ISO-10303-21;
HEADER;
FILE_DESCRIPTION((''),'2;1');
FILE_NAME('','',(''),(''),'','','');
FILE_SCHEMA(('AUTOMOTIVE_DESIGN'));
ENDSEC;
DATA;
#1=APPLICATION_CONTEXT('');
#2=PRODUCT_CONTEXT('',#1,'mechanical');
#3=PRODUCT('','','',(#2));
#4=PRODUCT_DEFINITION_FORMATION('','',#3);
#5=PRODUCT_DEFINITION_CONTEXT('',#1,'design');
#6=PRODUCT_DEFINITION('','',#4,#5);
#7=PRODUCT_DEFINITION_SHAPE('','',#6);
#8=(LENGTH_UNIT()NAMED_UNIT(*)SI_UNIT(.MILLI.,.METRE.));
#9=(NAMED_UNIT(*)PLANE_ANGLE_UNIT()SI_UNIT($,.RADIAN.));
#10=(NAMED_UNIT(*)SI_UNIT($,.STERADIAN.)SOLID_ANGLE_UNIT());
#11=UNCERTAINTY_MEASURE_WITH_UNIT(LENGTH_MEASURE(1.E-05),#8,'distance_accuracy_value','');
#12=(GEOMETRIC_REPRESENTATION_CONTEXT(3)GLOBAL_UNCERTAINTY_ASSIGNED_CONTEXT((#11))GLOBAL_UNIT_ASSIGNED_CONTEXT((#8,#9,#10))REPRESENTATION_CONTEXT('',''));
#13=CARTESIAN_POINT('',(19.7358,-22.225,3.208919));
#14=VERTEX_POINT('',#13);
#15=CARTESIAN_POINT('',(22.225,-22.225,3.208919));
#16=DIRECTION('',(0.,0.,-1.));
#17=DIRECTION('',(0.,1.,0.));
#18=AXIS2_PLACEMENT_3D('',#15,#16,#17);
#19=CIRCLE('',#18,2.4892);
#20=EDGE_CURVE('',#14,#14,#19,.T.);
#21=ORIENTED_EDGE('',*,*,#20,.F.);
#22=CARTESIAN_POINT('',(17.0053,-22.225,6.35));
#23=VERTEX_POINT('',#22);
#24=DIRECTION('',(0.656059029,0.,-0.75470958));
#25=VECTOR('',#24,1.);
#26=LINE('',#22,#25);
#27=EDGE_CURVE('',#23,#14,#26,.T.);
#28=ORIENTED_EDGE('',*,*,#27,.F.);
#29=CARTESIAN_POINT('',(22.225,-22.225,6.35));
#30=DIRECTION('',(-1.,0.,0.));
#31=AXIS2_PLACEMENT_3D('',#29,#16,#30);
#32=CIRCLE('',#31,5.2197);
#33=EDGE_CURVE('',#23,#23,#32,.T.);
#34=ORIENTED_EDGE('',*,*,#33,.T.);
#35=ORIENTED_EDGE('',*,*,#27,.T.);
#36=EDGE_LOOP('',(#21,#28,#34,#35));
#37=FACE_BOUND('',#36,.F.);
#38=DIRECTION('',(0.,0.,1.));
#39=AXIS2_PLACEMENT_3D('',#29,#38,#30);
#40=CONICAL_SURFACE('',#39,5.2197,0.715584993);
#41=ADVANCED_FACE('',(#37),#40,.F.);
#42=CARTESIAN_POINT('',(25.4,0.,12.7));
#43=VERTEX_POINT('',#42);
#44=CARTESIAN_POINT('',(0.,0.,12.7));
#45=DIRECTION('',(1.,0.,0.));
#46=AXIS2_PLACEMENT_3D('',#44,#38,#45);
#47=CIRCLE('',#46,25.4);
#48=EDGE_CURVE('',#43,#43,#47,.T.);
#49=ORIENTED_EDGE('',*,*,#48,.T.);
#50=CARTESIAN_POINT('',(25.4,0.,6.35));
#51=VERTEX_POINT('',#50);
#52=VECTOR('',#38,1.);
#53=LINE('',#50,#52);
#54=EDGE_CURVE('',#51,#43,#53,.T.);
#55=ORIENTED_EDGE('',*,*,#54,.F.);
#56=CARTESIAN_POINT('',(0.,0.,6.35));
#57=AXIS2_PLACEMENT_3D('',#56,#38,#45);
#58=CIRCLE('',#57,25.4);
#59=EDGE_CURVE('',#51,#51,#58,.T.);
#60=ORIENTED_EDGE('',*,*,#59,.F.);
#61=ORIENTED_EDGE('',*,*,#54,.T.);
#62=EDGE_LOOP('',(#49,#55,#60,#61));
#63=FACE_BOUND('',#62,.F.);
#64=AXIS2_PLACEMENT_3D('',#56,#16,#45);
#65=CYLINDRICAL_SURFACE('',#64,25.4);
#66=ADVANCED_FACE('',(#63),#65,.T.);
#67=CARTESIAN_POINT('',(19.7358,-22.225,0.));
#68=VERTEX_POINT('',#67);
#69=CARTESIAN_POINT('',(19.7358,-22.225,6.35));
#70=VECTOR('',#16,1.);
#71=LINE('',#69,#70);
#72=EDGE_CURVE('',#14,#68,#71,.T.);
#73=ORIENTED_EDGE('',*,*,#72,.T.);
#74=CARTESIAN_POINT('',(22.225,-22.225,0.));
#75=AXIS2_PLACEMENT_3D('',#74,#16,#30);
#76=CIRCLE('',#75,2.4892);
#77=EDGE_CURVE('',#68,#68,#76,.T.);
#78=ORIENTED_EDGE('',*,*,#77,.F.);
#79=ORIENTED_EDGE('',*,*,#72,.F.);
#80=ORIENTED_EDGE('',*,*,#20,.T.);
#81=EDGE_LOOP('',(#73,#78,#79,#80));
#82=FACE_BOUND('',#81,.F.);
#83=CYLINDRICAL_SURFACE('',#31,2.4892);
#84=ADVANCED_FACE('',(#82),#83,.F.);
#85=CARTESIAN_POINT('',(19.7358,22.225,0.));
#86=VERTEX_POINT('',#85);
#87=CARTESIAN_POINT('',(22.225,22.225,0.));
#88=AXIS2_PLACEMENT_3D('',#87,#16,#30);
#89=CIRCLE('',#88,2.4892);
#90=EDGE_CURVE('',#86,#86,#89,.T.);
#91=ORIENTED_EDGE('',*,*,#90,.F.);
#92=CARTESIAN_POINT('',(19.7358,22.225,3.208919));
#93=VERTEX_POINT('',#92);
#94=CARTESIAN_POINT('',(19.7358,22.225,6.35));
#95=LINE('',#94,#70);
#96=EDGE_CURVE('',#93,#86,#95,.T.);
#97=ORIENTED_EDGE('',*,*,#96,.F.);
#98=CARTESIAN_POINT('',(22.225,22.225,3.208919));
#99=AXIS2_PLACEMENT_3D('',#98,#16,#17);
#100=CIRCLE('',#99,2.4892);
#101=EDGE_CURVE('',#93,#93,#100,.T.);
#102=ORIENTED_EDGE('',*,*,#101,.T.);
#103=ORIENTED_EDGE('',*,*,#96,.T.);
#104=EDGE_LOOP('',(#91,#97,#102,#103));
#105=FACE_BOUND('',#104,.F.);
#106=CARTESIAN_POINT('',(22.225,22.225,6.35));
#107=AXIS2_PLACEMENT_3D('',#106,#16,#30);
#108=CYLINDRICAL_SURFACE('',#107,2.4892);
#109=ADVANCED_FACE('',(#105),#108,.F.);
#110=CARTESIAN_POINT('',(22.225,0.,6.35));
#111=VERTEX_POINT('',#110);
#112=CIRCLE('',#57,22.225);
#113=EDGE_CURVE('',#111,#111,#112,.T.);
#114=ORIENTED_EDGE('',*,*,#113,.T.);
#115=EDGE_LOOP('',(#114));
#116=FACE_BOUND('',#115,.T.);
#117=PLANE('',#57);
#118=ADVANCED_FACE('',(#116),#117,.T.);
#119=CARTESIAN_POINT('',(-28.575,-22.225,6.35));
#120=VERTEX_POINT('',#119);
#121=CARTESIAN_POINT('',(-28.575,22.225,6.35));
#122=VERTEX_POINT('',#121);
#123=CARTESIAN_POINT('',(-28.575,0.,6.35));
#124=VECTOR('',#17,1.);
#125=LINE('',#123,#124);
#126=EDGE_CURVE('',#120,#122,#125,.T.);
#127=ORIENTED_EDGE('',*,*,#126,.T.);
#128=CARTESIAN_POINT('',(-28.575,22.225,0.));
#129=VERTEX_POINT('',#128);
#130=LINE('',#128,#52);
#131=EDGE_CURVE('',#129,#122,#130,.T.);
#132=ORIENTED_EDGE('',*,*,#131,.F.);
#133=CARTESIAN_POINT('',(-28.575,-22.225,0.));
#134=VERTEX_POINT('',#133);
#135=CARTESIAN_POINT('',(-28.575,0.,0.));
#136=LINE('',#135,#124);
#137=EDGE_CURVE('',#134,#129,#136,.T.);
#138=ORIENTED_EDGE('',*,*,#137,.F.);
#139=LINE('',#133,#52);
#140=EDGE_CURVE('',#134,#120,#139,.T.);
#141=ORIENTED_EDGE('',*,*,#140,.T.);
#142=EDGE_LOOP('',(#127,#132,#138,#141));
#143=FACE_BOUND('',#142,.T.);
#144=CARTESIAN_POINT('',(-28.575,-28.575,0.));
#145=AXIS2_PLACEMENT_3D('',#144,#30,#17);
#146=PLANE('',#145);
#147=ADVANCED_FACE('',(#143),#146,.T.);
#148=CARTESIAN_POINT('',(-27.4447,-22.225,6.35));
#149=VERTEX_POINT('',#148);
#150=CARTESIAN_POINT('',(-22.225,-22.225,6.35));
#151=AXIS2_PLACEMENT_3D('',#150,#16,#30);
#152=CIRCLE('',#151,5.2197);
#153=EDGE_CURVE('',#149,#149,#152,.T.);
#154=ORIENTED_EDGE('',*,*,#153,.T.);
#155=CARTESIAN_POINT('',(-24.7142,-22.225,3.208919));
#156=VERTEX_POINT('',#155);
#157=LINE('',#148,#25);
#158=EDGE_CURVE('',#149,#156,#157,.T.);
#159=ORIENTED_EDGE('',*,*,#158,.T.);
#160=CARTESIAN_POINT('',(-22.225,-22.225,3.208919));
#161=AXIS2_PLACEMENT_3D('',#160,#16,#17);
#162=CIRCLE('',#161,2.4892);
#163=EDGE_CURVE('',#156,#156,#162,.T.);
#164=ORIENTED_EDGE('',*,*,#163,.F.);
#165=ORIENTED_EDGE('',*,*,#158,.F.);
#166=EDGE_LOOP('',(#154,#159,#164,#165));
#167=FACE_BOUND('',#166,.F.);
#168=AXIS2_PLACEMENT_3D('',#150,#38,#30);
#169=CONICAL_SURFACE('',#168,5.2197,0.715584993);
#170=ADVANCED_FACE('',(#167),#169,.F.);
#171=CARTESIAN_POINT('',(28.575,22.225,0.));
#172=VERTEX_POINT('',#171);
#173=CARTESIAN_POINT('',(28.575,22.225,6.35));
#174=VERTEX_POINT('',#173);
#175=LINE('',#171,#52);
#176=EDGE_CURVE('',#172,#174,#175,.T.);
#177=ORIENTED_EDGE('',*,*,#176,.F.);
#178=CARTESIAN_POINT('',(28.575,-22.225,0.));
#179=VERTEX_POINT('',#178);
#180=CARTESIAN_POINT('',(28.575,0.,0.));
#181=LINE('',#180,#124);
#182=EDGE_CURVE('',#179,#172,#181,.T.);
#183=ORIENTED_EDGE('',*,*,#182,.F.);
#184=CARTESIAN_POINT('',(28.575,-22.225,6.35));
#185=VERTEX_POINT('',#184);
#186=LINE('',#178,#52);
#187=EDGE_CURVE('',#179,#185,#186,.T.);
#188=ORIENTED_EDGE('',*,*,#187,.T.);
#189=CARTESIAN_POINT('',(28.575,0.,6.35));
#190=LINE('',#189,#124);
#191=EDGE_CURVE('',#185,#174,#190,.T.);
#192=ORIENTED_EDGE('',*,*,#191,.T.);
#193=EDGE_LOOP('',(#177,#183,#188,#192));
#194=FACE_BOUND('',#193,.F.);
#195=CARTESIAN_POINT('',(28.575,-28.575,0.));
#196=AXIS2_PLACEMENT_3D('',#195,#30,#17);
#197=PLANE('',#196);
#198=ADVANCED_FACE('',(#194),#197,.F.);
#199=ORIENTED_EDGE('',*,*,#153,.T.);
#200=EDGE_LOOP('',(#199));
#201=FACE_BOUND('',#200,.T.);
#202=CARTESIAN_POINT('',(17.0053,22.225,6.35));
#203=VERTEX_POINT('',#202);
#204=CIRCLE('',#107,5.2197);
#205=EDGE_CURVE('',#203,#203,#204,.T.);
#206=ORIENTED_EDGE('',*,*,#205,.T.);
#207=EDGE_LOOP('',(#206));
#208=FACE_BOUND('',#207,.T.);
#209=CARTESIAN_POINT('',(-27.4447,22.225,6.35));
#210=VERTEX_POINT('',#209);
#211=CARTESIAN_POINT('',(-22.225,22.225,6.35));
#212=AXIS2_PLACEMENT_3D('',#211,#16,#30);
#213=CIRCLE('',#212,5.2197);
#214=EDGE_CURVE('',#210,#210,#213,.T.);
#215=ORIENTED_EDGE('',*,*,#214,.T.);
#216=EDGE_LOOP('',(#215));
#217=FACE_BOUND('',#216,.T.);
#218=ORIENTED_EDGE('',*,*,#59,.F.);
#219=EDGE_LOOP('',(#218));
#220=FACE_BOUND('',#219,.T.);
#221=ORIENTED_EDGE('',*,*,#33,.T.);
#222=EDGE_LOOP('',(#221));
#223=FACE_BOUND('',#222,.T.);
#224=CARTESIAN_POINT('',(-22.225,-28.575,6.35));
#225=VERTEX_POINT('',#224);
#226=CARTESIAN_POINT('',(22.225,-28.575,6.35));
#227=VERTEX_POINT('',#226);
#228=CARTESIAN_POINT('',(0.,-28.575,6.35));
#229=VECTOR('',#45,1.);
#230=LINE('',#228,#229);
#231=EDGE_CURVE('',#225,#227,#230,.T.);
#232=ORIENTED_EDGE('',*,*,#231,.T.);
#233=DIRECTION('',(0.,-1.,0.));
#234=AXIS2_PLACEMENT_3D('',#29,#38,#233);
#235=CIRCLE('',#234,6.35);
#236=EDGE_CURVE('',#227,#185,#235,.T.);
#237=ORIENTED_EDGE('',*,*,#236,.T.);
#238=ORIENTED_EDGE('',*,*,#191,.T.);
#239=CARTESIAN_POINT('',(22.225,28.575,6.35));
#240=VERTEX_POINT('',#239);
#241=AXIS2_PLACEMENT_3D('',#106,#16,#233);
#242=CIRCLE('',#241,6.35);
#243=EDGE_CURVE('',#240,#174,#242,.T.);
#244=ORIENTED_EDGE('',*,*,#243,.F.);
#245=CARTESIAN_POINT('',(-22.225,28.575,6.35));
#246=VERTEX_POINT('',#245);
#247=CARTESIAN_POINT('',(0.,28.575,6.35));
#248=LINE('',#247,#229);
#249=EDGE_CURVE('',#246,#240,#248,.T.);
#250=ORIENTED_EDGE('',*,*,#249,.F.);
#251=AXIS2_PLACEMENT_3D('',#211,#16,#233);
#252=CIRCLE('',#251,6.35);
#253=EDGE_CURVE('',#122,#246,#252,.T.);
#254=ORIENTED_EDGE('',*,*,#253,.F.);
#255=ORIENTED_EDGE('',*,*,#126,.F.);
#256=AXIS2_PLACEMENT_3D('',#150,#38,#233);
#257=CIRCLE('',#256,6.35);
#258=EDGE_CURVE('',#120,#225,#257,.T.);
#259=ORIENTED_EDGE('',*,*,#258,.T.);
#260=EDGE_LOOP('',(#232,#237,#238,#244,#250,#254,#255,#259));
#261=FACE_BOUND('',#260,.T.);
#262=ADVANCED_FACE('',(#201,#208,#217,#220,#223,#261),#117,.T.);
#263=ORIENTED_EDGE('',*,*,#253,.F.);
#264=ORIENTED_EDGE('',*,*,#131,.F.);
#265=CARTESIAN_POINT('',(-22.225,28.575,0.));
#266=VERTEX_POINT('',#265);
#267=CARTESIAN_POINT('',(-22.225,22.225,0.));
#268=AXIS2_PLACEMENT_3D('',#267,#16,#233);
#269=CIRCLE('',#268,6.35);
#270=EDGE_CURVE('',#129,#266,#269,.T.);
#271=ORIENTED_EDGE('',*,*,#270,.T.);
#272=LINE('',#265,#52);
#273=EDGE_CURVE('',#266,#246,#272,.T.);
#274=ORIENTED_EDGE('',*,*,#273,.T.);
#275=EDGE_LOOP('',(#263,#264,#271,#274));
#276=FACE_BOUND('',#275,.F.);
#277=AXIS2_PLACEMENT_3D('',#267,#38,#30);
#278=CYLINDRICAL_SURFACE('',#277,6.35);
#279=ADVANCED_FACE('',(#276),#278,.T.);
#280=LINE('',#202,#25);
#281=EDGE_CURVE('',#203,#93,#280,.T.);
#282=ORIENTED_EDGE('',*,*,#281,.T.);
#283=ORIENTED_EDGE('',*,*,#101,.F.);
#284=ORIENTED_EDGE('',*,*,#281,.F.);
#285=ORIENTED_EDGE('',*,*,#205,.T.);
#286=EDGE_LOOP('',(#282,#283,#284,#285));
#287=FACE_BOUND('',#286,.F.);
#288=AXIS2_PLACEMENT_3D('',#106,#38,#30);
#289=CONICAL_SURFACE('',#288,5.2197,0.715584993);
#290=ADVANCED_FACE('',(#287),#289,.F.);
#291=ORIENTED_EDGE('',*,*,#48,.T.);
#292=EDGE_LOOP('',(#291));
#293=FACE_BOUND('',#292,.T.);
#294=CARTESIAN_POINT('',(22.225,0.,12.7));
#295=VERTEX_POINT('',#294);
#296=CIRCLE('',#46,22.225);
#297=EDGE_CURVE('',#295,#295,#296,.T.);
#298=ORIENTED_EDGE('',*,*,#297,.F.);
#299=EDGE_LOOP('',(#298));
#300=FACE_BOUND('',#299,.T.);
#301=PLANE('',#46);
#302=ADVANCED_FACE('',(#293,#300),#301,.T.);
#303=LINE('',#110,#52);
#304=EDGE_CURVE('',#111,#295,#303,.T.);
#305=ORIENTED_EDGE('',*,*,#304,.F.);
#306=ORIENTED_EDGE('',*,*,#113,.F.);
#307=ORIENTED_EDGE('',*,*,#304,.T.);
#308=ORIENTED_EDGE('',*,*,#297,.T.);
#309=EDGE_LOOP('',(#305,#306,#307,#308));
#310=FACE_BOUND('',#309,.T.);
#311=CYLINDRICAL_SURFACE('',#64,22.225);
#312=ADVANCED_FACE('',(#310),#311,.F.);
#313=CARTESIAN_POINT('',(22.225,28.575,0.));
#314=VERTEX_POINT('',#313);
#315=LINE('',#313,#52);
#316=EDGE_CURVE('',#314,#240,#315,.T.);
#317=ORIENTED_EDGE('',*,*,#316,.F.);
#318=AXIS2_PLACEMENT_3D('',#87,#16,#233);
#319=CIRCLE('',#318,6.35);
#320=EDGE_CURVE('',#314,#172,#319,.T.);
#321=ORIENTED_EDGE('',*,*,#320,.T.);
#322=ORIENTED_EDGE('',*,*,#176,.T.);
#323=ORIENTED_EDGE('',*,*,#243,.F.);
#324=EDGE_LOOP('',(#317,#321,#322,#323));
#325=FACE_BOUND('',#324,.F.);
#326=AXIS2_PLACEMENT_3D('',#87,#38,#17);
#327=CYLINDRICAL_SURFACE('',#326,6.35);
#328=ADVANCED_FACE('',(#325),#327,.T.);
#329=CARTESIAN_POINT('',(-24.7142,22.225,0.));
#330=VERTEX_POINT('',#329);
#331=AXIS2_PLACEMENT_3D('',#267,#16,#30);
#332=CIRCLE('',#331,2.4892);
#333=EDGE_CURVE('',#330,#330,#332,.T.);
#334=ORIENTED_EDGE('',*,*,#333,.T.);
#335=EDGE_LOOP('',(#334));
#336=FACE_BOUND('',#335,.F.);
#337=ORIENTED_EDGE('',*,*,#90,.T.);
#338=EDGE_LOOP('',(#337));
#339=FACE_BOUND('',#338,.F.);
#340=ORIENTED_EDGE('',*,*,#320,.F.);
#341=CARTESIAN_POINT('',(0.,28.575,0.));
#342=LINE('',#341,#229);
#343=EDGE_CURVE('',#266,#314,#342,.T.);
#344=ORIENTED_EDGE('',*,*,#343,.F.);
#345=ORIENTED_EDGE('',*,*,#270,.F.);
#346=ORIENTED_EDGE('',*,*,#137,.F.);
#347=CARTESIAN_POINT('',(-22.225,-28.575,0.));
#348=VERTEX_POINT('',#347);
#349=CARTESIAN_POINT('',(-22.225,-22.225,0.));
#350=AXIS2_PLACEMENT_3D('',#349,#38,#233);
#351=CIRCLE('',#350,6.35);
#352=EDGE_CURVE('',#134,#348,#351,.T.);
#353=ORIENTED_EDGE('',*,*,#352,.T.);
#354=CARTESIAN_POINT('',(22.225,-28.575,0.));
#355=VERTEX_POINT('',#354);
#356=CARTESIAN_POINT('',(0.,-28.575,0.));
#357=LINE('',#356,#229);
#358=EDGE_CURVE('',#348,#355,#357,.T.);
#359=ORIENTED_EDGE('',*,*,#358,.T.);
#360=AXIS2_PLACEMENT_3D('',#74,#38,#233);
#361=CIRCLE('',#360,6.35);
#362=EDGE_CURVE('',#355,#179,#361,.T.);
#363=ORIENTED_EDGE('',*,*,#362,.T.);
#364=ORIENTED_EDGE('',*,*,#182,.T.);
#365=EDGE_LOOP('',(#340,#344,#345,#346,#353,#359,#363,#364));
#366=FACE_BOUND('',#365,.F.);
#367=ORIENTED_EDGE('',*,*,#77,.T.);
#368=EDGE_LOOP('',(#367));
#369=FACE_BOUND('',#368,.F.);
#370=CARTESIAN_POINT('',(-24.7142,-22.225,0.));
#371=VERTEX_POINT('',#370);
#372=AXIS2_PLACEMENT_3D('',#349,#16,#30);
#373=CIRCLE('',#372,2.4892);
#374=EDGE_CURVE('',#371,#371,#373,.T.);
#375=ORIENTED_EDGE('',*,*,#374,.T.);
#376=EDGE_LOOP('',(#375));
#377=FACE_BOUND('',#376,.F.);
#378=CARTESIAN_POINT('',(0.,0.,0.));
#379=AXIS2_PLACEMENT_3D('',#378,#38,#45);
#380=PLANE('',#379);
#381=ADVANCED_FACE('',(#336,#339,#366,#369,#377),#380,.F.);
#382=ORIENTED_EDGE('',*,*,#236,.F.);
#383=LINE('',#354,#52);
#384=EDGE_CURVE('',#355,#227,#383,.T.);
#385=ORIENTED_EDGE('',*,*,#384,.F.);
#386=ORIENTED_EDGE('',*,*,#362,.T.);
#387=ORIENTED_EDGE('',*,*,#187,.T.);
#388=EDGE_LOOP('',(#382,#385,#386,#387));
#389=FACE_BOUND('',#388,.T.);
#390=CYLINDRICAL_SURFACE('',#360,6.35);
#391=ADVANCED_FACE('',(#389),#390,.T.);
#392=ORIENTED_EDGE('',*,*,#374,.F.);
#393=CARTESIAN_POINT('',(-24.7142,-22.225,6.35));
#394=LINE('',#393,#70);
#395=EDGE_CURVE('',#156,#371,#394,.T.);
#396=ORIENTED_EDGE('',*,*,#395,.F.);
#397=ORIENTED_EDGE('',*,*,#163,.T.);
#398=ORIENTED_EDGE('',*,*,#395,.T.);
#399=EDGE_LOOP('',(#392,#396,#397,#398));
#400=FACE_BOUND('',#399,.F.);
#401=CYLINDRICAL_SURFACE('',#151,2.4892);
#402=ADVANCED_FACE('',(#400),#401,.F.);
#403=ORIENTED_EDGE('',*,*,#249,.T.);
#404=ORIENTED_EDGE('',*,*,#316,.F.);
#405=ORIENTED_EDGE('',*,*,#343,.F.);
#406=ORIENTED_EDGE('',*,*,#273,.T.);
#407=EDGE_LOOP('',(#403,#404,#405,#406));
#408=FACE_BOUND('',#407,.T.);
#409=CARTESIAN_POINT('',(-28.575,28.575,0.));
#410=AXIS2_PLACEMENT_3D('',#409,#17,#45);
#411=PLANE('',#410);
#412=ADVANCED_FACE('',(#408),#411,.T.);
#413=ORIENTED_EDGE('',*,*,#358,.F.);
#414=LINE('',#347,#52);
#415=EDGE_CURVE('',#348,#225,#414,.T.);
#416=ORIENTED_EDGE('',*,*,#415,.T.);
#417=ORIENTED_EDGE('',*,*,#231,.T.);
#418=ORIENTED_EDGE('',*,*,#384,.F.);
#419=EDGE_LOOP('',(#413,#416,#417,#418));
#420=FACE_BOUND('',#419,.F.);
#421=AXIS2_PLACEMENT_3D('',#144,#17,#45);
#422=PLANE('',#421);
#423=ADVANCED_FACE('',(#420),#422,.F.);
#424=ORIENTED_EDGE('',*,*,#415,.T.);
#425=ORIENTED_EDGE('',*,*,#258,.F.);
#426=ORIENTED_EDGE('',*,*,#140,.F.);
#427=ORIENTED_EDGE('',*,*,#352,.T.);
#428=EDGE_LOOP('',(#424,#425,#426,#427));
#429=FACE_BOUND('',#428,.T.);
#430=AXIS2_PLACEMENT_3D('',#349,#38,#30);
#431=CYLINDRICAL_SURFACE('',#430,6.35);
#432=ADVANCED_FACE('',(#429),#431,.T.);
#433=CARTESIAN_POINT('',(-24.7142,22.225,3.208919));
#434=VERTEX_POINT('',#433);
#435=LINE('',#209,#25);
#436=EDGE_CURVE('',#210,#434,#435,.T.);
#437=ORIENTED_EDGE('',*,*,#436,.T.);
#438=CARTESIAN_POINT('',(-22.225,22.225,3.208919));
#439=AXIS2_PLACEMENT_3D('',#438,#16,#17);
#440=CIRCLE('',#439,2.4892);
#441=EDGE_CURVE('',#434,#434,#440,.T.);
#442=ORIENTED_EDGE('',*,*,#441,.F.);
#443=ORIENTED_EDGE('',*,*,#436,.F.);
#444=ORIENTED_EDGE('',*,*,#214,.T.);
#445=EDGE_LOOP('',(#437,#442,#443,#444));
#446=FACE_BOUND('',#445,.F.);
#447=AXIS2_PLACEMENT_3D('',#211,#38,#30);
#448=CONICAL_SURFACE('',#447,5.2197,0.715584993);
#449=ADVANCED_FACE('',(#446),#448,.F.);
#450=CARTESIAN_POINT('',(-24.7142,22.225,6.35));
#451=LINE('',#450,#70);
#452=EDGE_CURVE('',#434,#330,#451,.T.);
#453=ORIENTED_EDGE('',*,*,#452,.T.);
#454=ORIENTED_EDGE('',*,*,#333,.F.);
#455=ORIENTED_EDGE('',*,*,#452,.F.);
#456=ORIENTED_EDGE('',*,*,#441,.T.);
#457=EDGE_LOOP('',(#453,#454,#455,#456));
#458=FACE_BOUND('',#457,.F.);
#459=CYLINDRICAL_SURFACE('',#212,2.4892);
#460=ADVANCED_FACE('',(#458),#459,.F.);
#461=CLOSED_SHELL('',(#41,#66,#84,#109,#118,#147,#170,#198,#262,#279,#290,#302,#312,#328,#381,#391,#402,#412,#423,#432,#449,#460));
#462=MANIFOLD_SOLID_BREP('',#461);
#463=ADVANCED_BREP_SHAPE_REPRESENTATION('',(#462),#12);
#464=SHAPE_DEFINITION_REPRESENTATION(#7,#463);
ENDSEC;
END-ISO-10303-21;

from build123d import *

# Parameters (mm, degrees)
F0_W           = 57.15
F0_H           = 57.15
F1_DEPTH       = 6.35
F3_D           = 4.9784
F3_CSINK_D     = 10.4394
F3_CSINK_ANGLE = 82
F4_R           = 25.4
F4_R_2         = 22.225
F5_DEPTH       = 6.35
F6_R           = 6.35


# Not quite as in the source:
# - a feature names something its author has since deleted; it is built from what else it names


with BuildPart() as f1:
    # F0 (on Top) → F1 (new body)
    with BuildSketch(Plane.XY):
        Rectangle(F0_W, F0_H)
    extrude(amount=F1_DEPTH)

    # F3 (through all)
    with Locations(Plane.XY.offset(6.35)):
        with Locations((-22.225, 22.225), (22.225, 22.225), (22.225, -22.225), (-22.225, -22.225)):
            CounterSinkHole(F3_D / 2, F3_CSINK_D / 2, counter_sink_angle=F3_CSINK_ANGLE)

    # F4 (on face) → F5 (join)
    with BuildSketch(Plane.XY.offset(6.35)):
        Circle(F4_R)
        Circle(F4_R_2, mode=Mode.SUBTRACT)
    extrude(amount=F5_DEPTH)

    # F6
    f6_edges = [f1.edges().sort_by_distance(p)[0] for p in [
        (28.575, 28.575, 3.175),
        (-28.575, 28.575, 3.175),
        (28.575, -28.575, 3.175),
        (-28.575, -28.575, 3.175),
    ]]
    fillet(f6_edges, radius=F6_R)


solid = f1.part
